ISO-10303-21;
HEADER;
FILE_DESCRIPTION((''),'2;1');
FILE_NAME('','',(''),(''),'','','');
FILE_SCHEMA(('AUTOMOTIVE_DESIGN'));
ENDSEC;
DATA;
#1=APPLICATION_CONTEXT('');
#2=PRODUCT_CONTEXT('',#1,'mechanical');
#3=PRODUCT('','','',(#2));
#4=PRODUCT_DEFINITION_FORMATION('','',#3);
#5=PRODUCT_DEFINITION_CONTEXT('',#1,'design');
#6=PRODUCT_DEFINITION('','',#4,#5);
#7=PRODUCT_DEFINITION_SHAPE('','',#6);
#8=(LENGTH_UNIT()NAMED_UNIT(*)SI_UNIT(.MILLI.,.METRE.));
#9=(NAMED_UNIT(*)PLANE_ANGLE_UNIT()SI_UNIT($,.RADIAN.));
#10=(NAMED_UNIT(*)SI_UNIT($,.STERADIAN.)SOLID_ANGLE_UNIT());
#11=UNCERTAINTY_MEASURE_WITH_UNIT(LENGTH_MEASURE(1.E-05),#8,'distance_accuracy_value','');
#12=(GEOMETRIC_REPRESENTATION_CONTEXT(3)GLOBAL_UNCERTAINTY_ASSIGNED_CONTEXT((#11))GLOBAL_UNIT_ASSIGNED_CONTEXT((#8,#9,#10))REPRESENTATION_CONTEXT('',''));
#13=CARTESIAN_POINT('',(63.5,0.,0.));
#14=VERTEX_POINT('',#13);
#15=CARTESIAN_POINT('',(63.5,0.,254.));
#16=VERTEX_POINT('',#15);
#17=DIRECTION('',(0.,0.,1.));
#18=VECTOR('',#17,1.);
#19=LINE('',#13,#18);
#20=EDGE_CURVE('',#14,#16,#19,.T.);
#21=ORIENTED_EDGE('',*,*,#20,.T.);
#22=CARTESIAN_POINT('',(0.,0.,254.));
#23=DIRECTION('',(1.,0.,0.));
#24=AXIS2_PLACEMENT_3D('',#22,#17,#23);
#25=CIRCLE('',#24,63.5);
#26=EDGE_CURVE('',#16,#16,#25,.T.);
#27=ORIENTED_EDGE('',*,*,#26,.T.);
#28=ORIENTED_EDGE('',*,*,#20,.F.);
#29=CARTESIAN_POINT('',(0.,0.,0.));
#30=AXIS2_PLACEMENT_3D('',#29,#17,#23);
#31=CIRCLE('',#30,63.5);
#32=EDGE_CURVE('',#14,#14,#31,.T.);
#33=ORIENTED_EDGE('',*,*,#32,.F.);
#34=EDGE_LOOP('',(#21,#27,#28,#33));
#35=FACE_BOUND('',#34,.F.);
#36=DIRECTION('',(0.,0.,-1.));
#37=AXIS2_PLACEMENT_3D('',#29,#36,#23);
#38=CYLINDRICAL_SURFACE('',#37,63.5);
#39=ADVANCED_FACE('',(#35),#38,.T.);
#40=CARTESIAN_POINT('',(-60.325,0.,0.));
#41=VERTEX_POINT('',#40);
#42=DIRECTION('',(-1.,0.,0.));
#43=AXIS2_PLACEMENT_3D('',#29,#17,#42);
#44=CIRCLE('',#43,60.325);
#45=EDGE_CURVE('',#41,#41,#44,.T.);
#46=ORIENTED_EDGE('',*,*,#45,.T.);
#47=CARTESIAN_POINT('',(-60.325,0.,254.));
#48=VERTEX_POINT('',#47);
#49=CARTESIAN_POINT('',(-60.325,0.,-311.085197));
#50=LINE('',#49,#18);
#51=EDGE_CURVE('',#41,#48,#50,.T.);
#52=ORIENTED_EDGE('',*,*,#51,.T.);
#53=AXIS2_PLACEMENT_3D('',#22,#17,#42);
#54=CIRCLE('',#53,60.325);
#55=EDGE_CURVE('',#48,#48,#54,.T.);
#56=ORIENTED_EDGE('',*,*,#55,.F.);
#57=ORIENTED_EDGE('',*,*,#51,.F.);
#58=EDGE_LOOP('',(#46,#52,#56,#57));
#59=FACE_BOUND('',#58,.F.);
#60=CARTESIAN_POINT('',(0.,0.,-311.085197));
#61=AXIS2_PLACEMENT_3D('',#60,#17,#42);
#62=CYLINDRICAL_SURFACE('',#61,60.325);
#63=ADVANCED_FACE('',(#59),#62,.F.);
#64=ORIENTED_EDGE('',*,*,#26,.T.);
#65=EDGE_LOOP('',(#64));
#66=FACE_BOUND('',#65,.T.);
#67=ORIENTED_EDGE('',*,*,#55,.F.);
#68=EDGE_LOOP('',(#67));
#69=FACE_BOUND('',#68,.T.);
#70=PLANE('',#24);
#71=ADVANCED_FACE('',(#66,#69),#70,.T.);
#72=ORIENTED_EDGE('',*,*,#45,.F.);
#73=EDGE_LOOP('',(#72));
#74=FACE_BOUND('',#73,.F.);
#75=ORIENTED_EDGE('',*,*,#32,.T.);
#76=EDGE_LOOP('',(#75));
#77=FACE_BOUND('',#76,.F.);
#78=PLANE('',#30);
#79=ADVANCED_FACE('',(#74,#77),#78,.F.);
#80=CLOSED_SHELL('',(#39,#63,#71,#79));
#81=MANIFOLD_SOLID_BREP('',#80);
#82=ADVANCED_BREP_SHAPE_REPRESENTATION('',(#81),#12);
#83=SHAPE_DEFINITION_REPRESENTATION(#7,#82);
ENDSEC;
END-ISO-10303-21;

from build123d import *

# Parameters (mm, degrees)
F0_R     = 63.5
F1_DEPTH = 254
F3_D     = 120.65


# Not quite as in the source:
# - a feature names something its author has since deleted; it is built from what else it names


with BuildPart() as f1:
    # F0 (on Top) → F1 (new body)
    with BuildSketch(Plane.XY):
        Circle(F0_R)
    extrude(amount=F1_DEPTH)

    # F3 (through all)
    with Locations(Plane(origin=(0, 0, 0), x_dir=(1, 0, 0), z_dir=(0, 0, -1))):
        with Locations((0, 0)):
            Hole(F3_D / 2)


solid = f1.part
